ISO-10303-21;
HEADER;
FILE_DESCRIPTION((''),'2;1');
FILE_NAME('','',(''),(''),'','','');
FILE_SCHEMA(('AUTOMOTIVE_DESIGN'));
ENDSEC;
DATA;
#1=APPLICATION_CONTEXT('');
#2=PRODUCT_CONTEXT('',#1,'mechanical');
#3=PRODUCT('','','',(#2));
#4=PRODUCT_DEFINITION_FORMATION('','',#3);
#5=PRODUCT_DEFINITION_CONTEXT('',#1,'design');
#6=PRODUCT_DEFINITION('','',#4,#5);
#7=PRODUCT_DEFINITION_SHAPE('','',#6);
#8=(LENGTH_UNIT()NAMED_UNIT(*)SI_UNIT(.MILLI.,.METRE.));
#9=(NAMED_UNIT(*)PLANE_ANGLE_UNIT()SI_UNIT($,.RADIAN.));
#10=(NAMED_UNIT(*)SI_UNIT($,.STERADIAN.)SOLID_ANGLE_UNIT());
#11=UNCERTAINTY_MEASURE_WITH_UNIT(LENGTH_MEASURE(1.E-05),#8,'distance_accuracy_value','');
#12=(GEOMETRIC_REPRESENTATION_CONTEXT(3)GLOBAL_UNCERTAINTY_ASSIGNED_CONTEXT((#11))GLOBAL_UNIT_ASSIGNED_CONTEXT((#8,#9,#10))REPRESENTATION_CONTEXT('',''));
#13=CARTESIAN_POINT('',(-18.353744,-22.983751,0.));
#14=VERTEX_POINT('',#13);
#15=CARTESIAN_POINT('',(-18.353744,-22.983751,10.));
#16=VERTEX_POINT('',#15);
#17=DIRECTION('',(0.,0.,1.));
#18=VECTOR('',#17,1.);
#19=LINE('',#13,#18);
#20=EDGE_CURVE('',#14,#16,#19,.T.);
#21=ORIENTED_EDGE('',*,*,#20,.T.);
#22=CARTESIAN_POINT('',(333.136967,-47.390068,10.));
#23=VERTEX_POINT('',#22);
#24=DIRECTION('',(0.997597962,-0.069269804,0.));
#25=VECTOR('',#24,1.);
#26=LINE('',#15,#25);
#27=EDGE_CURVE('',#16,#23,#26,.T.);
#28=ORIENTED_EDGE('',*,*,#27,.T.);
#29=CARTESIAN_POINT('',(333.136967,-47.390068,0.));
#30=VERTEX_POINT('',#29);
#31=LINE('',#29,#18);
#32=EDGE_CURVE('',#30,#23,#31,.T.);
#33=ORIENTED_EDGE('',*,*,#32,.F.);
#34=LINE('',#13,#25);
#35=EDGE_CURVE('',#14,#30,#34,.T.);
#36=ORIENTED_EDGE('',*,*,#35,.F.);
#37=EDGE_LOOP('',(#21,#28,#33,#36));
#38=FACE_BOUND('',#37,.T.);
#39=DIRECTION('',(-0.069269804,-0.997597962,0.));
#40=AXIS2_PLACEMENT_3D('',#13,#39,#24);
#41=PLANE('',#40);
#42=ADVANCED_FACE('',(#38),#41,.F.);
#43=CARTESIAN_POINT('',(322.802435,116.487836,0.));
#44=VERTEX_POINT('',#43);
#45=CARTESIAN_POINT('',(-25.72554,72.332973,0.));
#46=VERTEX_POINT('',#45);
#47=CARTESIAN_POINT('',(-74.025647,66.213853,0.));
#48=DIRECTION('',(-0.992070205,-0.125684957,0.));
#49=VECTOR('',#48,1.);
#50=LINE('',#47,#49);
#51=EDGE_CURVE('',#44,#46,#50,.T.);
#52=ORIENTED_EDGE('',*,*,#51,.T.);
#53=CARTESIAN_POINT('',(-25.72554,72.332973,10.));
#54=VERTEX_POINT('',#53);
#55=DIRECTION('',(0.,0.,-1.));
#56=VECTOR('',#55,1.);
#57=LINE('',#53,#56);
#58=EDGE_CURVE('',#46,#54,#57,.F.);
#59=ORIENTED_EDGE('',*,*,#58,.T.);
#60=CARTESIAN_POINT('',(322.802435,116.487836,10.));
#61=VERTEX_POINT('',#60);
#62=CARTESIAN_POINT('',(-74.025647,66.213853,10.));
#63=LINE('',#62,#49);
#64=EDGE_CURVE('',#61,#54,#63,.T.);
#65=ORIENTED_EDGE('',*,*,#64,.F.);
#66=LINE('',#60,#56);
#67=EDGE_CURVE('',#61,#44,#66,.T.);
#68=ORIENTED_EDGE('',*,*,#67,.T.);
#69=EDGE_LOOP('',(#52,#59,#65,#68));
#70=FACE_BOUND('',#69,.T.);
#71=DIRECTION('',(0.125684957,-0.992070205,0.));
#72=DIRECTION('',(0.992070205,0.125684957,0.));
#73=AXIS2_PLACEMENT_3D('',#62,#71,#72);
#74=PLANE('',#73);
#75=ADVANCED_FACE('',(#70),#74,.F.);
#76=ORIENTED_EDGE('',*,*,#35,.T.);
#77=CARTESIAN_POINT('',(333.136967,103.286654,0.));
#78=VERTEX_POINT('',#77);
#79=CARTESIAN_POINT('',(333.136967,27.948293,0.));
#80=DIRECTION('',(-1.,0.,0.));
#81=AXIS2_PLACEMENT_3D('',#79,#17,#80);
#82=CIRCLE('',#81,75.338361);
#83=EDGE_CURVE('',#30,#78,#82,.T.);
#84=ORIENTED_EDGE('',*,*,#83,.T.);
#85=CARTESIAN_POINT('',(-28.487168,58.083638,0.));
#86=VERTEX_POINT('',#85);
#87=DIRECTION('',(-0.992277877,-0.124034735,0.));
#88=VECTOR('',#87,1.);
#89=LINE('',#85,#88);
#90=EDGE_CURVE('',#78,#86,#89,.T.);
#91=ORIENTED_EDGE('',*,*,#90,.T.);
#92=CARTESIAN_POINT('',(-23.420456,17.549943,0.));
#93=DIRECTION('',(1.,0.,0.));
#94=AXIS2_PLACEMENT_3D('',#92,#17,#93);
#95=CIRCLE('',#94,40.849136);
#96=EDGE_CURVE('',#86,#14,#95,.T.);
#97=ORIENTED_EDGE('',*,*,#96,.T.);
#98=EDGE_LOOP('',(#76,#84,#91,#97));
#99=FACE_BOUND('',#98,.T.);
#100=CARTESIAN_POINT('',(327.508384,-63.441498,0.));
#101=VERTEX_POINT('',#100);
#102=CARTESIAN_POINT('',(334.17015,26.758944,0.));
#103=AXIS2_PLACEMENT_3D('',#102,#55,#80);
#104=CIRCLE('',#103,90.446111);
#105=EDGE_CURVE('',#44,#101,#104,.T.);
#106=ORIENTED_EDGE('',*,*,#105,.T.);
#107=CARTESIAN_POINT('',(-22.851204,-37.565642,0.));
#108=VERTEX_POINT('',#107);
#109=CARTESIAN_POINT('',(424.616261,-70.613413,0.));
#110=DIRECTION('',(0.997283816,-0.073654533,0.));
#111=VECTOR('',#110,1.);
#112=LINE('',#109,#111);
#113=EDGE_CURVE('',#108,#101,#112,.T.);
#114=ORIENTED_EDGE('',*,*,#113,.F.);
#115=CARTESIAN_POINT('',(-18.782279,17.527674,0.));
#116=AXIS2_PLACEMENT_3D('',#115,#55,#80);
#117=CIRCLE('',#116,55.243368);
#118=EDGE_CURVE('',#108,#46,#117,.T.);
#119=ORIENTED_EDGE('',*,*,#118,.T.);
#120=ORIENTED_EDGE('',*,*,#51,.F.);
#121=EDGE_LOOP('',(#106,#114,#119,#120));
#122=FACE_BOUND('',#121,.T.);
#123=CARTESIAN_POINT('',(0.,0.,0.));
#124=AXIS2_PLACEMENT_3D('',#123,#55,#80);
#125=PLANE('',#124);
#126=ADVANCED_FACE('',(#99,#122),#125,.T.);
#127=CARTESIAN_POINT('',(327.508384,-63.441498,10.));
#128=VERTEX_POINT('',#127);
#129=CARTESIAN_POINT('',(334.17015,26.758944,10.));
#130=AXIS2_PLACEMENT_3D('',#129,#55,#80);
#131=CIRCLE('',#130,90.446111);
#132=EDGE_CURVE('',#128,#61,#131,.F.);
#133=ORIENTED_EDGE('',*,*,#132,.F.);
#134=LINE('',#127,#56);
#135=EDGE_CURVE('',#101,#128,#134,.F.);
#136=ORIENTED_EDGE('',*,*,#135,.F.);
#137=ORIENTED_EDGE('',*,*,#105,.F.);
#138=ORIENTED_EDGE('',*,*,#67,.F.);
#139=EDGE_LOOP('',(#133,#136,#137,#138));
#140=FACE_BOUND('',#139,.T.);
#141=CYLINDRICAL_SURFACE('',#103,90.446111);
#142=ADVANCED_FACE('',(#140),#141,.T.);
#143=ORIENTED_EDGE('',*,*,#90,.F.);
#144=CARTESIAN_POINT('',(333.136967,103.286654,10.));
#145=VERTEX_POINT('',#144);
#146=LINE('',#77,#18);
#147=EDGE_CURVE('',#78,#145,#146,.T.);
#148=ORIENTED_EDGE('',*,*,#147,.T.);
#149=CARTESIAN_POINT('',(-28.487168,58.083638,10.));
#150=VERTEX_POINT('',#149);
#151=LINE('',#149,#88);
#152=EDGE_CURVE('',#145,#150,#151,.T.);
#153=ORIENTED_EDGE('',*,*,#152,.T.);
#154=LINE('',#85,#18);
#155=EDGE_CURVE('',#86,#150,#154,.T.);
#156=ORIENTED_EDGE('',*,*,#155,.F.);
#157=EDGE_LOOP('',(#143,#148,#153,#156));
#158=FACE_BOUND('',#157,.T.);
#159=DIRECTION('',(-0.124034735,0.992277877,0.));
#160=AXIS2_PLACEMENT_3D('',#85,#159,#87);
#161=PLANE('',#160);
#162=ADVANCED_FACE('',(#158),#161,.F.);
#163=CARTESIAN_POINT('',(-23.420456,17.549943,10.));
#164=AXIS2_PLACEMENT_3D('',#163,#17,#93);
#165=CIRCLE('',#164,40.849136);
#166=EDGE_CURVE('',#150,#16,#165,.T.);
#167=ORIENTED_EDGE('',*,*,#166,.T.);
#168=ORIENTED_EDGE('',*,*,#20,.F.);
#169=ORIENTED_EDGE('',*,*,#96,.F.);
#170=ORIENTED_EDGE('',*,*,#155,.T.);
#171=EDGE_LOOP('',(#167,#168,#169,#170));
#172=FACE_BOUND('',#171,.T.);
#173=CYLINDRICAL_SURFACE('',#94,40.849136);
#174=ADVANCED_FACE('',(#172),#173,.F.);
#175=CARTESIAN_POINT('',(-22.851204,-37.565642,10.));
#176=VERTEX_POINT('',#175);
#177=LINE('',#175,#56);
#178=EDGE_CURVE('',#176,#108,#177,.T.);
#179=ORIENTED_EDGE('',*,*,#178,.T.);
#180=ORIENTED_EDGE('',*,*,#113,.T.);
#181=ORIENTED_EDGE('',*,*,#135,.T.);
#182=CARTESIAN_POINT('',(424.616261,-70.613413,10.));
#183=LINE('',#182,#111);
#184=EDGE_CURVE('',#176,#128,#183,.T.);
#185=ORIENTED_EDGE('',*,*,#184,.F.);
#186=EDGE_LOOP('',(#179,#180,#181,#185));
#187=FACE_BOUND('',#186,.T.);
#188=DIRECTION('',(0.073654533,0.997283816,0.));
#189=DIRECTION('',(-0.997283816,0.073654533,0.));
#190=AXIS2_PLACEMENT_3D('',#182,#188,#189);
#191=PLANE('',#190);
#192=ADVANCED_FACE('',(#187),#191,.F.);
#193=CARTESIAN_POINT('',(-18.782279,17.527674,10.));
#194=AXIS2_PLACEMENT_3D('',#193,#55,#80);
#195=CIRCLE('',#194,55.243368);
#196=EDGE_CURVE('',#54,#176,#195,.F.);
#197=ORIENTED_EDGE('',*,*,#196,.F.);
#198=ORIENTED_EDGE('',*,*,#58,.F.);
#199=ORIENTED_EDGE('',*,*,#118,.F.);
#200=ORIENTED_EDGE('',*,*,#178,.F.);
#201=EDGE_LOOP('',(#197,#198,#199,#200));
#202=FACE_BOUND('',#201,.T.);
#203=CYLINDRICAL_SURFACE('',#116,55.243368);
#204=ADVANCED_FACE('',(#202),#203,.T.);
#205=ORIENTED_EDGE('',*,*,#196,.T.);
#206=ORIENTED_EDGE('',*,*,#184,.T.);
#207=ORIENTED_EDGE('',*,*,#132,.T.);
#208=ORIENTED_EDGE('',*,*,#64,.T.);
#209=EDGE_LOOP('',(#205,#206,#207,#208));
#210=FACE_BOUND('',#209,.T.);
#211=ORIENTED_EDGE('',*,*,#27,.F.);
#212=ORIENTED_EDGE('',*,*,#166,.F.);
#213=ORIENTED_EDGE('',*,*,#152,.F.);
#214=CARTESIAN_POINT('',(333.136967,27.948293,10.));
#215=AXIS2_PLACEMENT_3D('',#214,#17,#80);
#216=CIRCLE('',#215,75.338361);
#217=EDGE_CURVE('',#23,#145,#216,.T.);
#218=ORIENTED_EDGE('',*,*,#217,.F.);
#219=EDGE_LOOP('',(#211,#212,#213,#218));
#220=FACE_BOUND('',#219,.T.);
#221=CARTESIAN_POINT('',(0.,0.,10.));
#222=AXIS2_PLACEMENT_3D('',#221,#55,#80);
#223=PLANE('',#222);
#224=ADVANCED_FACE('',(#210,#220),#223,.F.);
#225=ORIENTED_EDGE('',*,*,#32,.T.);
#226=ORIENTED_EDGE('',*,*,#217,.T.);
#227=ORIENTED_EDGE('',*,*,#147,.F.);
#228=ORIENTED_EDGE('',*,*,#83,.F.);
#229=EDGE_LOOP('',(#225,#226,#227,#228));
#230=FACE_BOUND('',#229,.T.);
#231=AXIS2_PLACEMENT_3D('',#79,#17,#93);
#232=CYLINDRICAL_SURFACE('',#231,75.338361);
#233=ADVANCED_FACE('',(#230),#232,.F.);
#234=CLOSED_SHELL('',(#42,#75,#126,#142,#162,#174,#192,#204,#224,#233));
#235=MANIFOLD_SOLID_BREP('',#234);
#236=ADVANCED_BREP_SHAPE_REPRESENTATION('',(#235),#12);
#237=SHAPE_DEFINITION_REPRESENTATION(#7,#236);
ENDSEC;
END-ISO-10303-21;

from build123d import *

# Parameters (mm, degrees)
EXTRUDE_1_DEPTH     = 10
FILLET_1_R          = 55.243368
FILLET_2_R          = 90.446111
CUT_EXTRUDE_1_DEPTH = 10


with BuildPart() as part:
    # 草图1 → 凸台-拉伸1 (new body)
    with BuildSketch(Plane.XY):
        Polygon((424.616260913, 129.386586507), (424.616260913, -70.613413493), (-74.025647104, -33.786146841), (-74.025647104, 66.213853159), align=None)
    extrude(amount=EXTRUDE_1_DEPTH)

    # 圆角1
    fillet_1_edges = [part.edges().sort_by_distance(p)[0] for p in [
        (-74.025647104, -33.786146841, 5),
        (-74.025647104, 66.213853159, 5),
    ]]
    fillet(fillet_1_edges, radius=FILLET_1_R - 0.0001)  # a hair under: the kernel refuses the full size

    # 圆角2
    fillet_2_edges = [part.edges().sort_by_distance(p)[0] for p in [
        (424.616260913, 129.386586507, 5),
        (424.616260913, -70.613413493, 5),
    ]]
    fillet(fillet_2_edges, radius=FILLET_2_R - 0.0001)  # a hair under: the kernel refuses the full size

    # 草图2 → 切除-拉伸1 (cut)
    with BuildSketch(Plane.XY.offset(10)):
        with BuildLine():
            Line((-28.487167505, 58.083637567), (333.136967432, 103.286654435))
            ThreePointArc((333.136967432, 103.286654435), (408.475328877, 27.948292989), (333.136967432, -47.390068456))
            Line((333.136967432, -47.390068456), (-18.353743943, -22.983750924))
            ThreePointArc((-18.353743943, -22.983750924), (-63.95414997, 12.483231541), (-28.487167505, 58.083637567))
        make_face()
    extrude(amount=-CUT_EXTRUDE_1_DEPTH, mode=Mode.SUBTRACT)


solid = part.part
